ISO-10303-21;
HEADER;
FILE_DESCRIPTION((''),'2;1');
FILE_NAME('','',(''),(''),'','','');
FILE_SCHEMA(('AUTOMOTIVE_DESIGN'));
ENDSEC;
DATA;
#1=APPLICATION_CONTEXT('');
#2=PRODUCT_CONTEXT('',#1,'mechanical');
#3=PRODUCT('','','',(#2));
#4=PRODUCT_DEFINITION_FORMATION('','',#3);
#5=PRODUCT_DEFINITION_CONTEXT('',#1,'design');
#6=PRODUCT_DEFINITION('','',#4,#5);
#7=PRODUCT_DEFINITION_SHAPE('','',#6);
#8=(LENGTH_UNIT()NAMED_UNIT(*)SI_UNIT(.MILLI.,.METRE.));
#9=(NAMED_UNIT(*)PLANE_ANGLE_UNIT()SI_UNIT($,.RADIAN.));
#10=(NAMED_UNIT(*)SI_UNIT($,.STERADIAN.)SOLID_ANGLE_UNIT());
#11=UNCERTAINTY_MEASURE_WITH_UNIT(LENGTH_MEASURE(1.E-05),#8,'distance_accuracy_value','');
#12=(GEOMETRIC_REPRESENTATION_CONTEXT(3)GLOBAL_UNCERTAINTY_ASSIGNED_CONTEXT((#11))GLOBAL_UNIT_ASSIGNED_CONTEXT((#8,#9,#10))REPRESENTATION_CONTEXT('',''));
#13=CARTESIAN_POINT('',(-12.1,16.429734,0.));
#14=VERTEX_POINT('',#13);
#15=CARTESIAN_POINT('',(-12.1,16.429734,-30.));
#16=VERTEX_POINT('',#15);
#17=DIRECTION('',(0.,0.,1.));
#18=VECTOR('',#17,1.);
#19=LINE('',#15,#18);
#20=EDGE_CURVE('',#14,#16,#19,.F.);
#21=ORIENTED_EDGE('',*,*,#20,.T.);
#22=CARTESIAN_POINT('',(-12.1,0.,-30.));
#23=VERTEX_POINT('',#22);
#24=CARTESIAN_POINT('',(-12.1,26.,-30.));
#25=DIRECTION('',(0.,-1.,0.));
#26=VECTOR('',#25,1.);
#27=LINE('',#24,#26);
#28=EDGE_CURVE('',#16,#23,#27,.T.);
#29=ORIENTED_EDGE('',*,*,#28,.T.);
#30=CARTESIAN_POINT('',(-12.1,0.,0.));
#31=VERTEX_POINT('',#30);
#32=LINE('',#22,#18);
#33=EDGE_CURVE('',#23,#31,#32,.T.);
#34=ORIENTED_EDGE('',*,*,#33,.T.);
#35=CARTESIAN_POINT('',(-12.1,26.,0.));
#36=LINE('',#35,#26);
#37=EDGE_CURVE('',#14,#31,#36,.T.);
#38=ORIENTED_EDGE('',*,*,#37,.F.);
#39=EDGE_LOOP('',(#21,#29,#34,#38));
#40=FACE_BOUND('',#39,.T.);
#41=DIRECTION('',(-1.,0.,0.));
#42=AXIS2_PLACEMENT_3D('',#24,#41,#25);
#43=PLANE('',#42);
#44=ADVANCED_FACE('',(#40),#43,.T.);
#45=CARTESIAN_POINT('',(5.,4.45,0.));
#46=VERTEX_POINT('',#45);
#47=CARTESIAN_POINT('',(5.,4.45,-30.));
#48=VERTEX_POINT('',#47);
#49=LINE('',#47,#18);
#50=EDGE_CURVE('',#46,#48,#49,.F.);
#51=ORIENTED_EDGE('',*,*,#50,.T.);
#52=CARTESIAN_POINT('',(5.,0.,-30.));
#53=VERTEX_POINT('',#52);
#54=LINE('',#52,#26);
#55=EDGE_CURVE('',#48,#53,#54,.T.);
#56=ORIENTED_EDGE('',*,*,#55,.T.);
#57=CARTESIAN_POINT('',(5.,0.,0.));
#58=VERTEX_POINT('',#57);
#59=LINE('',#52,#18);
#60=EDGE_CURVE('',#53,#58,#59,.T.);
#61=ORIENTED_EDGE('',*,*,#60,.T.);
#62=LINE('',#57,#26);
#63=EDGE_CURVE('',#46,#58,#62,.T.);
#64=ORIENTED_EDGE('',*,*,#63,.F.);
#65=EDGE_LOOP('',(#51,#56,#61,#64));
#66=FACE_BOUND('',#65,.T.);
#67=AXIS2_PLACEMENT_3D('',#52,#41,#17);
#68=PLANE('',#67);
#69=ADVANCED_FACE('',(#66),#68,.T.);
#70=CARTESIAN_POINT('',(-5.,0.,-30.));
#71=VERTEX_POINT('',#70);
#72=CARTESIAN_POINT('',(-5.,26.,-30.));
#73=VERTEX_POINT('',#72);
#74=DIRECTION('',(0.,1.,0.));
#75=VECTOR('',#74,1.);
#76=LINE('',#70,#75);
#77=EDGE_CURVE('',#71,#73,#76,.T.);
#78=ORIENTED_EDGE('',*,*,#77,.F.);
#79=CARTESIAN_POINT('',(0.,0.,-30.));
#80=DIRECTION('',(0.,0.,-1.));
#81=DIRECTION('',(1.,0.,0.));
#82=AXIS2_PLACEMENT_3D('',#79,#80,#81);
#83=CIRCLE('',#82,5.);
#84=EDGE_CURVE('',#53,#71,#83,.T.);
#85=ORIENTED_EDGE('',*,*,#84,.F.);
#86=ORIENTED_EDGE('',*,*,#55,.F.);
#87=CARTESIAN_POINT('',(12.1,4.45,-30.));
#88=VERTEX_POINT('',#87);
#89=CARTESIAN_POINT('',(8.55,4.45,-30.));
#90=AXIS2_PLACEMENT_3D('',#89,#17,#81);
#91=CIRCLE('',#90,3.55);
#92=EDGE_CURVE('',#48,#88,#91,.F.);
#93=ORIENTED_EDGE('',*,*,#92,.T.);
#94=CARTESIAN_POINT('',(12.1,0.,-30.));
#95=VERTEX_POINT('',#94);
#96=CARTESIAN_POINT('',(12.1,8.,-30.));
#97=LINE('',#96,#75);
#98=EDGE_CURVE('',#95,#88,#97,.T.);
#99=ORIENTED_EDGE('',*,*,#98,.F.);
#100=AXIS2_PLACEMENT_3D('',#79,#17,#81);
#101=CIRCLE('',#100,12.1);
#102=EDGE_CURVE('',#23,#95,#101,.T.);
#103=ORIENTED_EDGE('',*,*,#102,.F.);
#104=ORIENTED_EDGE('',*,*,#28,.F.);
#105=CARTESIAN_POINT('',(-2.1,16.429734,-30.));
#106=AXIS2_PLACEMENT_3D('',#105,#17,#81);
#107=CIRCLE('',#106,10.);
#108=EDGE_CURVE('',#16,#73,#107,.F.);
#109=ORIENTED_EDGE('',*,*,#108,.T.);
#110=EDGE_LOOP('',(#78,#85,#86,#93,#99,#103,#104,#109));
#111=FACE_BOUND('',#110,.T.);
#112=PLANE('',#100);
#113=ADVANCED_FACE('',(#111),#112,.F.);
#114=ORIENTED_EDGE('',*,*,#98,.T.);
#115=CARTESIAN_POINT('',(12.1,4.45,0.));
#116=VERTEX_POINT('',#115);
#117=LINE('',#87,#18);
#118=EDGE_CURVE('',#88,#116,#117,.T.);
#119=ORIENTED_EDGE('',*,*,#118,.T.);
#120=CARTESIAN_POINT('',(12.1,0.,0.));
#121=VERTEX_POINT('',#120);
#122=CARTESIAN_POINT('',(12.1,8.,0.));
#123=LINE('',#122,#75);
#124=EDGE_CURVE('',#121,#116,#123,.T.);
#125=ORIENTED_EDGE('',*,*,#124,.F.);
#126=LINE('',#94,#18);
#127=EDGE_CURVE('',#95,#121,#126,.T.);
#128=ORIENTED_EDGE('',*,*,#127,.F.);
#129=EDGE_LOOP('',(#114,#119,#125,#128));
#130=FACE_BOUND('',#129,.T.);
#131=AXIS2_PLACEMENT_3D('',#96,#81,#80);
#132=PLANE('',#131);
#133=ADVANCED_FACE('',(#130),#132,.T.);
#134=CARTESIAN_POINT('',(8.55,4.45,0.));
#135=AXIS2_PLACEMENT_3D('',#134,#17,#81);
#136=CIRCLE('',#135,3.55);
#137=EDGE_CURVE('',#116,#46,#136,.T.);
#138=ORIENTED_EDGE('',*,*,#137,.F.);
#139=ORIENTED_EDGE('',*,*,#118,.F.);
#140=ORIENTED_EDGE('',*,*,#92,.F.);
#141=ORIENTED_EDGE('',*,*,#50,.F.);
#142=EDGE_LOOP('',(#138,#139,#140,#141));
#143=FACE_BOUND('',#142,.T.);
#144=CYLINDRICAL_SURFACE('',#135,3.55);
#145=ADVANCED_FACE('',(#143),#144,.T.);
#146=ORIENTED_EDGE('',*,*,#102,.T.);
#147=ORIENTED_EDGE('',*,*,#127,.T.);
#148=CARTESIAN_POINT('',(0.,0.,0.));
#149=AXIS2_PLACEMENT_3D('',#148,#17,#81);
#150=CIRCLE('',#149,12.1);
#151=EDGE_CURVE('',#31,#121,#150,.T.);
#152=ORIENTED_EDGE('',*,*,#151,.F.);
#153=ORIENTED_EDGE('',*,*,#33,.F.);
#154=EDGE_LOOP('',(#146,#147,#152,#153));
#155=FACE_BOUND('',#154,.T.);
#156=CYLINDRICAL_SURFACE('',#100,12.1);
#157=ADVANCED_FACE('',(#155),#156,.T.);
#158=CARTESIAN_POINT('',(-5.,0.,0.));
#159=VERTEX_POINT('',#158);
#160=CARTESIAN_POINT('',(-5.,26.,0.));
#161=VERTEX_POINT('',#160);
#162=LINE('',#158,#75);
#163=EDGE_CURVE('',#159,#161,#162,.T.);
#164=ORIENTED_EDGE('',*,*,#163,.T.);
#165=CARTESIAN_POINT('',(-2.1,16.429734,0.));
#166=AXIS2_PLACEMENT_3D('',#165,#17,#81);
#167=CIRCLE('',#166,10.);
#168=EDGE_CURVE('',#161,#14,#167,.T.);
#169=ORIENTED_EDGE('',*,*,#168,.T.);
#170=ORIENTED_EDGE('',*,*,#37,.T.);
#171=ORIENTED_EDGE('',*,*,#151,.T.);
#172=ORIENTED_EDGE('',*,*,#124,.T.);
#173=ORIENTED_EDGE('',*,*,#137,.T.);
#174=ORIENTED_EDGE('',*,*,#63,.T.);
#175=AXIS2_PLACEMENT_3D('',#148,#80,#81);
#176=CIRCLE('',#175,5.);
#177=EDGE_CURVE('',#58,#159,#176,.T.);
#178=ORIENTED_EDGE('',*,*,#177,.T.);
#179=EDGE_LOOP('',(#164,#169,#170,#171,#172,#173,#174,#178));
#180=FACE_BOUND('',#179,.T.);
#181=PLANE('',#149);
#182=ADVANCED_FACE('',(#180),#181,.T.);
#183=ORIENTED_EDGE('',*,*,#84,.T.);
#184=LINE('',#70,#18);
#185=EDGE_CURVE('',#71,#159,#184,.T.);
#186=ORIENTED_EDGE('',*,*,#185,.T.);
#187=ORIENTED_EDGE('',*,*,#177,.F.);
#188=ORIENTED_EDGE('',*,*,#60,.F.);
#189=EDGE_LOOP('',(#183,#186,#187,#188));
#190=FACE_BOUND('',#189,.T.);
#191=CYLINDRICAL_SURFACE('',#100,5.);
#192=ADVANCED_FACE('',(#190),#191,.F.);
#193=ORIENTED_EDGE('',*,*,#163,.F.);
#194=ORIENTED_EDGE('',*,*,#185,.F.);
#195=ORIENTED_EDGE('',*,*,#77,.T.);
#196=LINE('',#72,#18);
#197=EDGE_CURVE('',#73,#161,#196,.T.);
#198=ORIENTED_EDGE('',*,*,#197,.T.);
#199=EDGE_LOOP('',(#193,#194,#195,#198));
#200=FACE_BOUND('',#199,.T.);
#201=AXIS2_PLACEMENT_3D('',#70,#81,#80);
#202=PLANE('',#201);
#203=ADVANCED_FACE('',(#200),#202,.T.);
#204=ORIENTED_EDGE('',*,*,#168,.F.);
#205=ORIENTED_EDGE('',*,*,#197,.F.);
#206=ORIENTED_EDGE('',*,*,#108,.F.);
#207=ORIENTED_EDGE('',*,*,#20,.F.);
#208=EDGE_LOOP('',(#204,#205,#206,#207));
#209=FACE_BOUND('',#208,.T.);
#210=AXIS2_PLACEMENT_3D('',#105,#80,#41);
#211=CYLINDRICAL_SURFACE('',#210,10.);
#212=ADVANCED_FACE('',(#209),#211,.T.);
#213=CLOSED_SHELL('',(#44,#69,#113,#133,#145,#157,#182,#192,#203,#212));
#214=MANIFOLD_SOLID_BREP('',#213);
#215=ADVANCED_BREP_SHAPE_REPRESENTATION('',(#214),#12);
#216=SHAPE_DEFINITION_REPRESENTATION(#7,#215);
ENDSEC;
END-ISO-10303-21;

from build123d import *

# Parameters (mm, degrees)
BOSS_EXTRUDE1_DEPTH = 30
FILLET1_R           = 10
FILLET3_RADIUS      = 3.55
FILLET3_LENGTH      = 30


with BuildPart() as part:
    # Sketch1 → Boss-Extrude1 (new body)
    with BuildSketch(Plane.XY):
        with BuildLine():
            Line((5, 0), (5, 8))
            Line((5, 8), (12.1, 8))
            Line((12.1, 8), (12.1, 0))
            ThreePointArc((12.1, 0), (0, -12.1), (-12.1, 0))
            Line((-12.1, 0), (-12.1, 26))
            Line((-12.1, 26), (-5, 26))
            Line((-5, 26), (-5, 0))
            ThreePointArc((-5, 0), (0, -5), (5, 0))
        make_face()
    extrude(amount=-BOSS_EXTRUDE1_DEPTH)

    # Fillet1
    # the kernel refuses this fillet: 10 mm, written as the material it takes off along each edge
    with BuildSketch(Plane(origin=(-12.1, 26, 23.925666135), x_dir=(0, -1, 0), z_dir=(0, 0, -1))) as fillet1_piece_1:
        with BuildLine():
            CenterArc((9.570266454, -10), FILLET1_R, 90, 73.142043978)
            Line((0, -7.1), (-0.191405329, -7.042))
            ThreePointArc((-0.191405329, -7.042), (-0.2, -3.55), (-0.2, 0))
            Line((-0.2, 0), (0, 0.2))
            Line((0, 0.2), (9.570266454, 0.2))
            Line((9.570266454, 0.2), (9.570266454, 0))
        make_face()
    extrude(amount=77.85133227, mode=Mode.SUBTRACT)

    # Fillet3: full round fillet: the end face becomes a half cylinder, R = half its width
    fillet3_face = Plane((8.55, 8, -15), x_dir=(0, 0, 1), z_dir=(0, 1, 0))  # on the end face: x along it, z out of the body
    fillet3_slab = fillet3_face.offset(-FILLET3_RADIUS / 2) * Box(FILLET3_LENGTH, 2 * FILLET3_RADIUS, FILLET3_RADIUS, mode=Mode.PRIVATE)  # the body's end, R deep
    fillet3_round = Plane((8.55, 4.45, -15), x_dir=(0, 1, 0), z_dir=(0, 0, 1)) * Cylinder(FILLET3_RADIUS, FILLET3_LENGTH, mode=Mode.PRIVATE)  # its axis R under the face
    add(fillet3_slab - fillet3_round, mode=Mode.SUBTRACT)


solid = part.part
